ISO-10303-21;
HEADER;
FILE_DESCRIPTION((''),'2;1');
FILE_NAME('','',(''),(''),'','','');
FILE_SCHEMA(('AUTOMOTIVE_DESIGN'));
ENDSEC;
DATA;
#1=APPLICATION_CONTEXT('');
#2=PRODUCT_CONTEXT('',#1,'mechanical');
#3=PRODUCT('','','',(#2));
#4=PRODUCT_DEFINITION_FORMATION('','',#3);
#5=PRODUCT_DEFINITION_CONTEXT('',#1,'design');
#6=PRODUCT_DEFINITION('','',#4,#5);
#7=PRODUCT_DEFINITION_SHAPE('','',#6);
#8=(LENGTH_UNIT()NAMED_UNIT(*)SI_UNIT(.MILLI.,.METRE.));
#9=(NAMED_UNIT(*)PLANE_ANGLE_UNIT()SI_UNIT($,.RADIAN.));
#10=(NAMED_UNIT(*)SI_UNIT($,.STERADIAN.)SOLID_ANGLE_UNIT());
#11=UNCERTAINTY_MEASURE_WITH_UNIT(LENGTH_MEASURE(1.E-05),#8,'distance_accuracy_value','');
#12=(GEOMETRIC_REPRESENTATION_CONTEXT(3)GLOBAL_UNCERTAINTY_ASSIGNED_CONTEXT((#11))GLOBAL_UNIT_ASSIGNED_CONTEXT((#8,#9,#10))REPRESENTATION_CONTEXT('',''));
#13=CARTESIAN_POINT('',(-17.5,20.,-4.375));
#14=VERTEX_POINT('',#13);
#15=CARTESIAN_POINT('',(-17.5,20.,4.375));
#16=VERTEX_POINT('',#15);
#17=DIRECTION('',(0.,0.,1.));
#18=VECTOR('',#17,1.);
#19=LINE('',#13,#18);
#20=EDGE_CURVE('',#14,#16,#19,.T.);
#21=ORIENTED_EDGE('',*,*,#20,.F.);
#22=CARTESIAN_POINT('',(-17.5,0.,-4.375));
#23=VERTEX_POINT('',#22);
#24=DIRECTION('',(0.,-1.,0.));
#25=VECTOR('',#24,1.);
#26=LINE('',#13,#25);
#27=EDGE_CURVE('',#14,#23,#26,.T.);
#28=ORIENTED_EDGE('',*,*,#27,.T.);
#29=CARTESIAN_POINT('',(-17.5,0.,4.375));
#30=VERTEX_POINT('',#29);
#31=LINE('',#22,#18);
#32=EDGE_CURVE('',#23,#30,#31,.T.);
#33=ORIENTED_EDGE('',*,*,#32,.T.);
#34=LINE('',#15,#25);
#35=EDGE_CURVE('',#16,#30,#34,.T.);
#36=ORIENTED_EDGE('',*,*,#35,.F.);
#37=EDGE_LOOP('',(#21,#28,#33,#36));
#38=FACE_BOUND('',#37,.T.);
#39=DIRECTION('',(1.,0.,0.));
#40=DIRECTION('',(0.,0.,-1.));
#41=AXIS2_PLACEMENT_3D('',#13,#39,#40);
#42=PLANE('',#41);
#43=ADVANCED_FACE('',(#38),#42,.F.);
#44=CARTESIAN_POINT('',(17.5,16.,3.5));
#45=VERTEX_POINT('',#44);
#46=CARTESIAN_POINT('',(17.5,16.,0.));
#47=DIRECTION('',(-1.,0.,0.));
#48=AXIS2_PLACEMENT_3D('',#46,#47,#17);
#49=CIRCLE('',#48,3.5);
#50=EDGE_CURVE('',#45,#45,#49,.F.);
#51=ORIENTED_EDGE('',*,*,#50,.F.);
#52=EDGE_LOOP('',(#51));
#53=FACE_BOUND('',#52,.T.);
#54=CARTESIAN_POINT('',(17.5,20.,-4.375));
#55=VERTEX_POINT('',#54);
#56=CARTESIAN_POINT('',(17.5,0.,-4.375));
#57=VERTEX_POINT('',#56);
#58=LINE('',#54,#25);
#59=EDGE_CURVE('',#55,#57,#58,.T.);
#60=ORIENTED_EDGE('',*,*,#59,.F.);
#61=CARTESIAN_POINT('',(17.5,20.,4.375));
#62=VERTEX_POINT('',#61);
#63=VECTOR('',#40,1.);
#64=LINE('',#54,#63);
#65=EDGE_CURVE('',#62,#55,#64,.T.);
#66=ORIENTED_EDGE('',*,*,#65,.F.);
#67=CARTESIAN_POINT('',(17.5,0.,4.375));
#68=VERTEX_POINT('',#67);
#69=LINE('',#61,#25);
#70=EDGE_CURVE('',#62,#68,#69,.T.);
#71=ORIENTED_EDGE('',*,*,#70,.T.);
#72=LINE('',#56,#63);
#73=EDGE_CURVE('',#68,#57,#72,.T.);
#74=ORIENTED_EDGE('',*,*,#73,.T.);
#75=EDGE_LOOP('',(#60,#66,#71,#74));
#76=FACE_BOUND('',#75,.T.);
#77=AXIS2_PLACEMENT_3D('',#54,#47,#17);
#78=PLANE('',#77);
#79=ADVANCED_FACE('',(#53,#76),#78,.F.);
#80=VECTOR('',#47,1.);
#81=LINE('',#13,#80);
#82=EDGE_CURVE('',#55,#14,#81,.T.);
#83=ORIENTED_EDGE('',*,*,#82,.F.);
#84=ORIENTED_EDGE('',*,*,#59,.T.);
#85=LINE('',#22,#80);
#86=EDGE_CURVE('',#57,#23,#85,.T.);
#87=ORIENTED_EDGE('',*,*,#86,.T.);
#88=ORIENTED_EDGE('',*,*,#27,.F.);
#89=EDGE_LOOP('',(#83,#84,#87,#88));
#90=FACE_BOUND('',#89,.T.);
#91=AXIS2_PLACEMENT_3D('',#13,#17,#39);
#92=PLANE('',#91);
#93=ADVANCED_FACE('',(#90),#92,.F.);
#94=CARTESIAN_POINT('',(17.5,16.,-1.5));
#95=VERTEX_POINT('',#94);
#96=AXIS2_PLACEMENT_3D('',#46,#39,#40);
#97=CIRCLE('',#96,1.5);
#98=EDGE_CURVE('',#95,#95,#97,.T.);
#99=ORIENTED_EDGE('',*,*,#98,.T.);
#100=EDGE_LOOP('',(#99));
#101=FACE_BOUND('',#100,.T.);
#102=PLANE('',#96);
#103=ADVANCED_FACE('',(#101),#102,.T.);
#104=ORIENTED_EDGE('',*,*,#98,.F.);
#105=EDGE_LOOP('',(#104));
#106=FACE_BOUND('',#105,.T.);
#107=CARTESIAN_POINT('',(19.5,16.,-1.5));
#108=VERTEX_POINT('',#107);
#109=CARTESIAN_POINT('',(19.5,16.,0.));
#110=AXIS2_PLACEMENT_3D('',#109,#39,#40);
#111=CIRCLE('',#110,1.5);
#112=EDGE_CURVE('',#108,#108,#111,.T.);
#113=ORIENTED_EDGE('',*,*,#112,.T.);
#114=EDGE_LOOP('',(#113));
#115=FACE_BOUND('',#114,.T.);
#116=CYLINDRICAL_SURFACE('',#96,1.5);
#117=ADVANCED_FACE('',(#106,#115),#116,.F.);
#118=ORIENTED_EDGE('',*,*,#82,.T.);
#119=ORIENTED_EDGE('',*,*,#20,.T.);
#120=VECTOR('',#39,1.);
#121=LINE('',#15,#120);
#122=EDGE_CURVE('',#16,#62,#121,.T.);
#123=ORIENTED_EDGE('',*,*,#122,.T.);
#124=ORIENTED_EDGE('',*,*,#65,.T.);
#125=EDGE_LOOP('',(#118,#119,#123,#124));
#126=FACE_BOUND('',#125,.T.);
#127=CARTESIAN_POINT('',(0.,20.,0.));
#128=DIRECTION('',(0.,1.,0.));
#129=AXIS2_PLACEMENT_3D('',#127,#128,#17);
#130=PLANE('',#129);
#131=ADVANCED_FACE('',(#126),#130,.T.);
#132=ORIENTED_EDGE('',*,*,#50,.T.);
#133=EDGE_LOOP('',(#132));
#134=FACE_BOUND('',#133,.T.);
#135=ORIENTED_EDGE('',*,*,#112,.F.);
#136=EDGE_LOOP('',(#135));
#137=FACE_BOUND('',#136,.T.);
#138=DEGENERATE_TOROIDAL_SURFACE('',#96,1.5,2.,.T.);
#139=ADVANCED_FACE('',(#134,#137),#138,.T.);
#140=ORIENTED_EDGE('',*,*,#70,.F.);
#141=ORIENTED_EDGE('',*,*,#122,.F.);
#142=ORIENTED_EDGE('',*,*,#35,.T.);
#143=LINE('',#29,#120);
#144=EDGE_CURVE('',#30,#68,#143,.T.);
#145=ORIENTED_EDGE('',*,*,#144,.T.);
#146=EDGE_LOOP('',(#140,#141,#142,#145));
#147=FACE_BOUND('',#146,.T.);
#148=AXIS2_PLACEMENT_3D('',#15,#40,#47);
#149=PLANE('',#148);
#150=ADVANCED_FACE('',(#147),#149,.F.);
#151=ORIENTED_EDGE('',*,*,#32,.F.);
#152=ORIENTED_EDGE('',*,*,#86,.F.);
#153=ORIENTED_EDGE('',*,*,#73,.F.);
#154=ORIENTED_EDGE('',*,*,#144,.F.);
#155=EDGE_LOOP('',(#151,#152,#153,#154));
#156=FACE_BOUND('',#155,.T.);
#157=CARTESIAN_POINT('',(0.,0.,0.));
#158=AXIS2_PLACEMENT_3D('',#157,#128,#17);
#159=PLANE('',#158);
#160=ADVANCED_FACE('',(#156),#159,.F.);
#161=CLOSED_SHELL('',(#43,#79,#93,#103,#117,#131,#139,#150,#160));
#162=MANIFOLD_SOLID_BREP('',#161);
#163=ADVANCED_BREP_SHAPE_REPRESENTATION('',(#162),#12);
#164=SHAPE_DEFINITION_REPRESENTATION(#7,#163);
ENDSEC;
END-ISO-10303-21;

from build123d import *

# Parameters (mm, degrees)
SKETCH1_W           = 35
SKETCH1_H           = 8.75
BOSS_EXTRUDE1_DEPTH = 20
SKETCH2_R           = 3.5
BOSS_EXTRUDE2_DEPTH = 2
SKETCH3_R           = 1.5
CUT_EXTRUDE1_DEPTH  = 2
FILLET1_R           = 2


with BuildPart() as part:
    # Sketch1 → Boss-Extrude1 (new body)
    with BuildSketch(Plane(origin=(0, 0, 0), x_dir=(1, 0, 0), z_dir=(0, 1, 0))):
        Rectangle(SKETCH1_W, SKETCH1_H)
    extrude(amount=BOSS_EXTRUDE1_DEPTH)

    # Sketch2 → Boss-Extrude2 (add)
    with BuildSketch(Plane(origin=(17.5, 0, 0), x_dir=(0, 0, -1), z_dir=(1, 0, 0))):
        with Locations(Location((0, 16, 0), (0, 0, 180))):
            Circle(SKETCH2_R)
    extrude(amount=BOSS_EXTRUDE2_DEPTH)

    # Sketch3 → Cut-Extrude1 (cut)
    with BuildSketch(Plane(origin=(19.5, 0, 0), x_dir=(0, 0, -1), z_dir=(1, 0, 0))):
        with Locations((0, 16)):
            Circle(SKETCH3_R)
    extrude(amount=-CUT_EXTRUDE1_DEPTH, mode=Mode.SUBTRACT)

    # Fillet1
    fillet1_edges = [part.edges().sort_by_distance(p)[0] for p in [
        (19.5, 16, -3.5),
    ]]
    fillet(fillet1_edges, radius=FILLET1_R - 0.0001)  # a hair under: the kernel refuses the full size


solid = part.part
